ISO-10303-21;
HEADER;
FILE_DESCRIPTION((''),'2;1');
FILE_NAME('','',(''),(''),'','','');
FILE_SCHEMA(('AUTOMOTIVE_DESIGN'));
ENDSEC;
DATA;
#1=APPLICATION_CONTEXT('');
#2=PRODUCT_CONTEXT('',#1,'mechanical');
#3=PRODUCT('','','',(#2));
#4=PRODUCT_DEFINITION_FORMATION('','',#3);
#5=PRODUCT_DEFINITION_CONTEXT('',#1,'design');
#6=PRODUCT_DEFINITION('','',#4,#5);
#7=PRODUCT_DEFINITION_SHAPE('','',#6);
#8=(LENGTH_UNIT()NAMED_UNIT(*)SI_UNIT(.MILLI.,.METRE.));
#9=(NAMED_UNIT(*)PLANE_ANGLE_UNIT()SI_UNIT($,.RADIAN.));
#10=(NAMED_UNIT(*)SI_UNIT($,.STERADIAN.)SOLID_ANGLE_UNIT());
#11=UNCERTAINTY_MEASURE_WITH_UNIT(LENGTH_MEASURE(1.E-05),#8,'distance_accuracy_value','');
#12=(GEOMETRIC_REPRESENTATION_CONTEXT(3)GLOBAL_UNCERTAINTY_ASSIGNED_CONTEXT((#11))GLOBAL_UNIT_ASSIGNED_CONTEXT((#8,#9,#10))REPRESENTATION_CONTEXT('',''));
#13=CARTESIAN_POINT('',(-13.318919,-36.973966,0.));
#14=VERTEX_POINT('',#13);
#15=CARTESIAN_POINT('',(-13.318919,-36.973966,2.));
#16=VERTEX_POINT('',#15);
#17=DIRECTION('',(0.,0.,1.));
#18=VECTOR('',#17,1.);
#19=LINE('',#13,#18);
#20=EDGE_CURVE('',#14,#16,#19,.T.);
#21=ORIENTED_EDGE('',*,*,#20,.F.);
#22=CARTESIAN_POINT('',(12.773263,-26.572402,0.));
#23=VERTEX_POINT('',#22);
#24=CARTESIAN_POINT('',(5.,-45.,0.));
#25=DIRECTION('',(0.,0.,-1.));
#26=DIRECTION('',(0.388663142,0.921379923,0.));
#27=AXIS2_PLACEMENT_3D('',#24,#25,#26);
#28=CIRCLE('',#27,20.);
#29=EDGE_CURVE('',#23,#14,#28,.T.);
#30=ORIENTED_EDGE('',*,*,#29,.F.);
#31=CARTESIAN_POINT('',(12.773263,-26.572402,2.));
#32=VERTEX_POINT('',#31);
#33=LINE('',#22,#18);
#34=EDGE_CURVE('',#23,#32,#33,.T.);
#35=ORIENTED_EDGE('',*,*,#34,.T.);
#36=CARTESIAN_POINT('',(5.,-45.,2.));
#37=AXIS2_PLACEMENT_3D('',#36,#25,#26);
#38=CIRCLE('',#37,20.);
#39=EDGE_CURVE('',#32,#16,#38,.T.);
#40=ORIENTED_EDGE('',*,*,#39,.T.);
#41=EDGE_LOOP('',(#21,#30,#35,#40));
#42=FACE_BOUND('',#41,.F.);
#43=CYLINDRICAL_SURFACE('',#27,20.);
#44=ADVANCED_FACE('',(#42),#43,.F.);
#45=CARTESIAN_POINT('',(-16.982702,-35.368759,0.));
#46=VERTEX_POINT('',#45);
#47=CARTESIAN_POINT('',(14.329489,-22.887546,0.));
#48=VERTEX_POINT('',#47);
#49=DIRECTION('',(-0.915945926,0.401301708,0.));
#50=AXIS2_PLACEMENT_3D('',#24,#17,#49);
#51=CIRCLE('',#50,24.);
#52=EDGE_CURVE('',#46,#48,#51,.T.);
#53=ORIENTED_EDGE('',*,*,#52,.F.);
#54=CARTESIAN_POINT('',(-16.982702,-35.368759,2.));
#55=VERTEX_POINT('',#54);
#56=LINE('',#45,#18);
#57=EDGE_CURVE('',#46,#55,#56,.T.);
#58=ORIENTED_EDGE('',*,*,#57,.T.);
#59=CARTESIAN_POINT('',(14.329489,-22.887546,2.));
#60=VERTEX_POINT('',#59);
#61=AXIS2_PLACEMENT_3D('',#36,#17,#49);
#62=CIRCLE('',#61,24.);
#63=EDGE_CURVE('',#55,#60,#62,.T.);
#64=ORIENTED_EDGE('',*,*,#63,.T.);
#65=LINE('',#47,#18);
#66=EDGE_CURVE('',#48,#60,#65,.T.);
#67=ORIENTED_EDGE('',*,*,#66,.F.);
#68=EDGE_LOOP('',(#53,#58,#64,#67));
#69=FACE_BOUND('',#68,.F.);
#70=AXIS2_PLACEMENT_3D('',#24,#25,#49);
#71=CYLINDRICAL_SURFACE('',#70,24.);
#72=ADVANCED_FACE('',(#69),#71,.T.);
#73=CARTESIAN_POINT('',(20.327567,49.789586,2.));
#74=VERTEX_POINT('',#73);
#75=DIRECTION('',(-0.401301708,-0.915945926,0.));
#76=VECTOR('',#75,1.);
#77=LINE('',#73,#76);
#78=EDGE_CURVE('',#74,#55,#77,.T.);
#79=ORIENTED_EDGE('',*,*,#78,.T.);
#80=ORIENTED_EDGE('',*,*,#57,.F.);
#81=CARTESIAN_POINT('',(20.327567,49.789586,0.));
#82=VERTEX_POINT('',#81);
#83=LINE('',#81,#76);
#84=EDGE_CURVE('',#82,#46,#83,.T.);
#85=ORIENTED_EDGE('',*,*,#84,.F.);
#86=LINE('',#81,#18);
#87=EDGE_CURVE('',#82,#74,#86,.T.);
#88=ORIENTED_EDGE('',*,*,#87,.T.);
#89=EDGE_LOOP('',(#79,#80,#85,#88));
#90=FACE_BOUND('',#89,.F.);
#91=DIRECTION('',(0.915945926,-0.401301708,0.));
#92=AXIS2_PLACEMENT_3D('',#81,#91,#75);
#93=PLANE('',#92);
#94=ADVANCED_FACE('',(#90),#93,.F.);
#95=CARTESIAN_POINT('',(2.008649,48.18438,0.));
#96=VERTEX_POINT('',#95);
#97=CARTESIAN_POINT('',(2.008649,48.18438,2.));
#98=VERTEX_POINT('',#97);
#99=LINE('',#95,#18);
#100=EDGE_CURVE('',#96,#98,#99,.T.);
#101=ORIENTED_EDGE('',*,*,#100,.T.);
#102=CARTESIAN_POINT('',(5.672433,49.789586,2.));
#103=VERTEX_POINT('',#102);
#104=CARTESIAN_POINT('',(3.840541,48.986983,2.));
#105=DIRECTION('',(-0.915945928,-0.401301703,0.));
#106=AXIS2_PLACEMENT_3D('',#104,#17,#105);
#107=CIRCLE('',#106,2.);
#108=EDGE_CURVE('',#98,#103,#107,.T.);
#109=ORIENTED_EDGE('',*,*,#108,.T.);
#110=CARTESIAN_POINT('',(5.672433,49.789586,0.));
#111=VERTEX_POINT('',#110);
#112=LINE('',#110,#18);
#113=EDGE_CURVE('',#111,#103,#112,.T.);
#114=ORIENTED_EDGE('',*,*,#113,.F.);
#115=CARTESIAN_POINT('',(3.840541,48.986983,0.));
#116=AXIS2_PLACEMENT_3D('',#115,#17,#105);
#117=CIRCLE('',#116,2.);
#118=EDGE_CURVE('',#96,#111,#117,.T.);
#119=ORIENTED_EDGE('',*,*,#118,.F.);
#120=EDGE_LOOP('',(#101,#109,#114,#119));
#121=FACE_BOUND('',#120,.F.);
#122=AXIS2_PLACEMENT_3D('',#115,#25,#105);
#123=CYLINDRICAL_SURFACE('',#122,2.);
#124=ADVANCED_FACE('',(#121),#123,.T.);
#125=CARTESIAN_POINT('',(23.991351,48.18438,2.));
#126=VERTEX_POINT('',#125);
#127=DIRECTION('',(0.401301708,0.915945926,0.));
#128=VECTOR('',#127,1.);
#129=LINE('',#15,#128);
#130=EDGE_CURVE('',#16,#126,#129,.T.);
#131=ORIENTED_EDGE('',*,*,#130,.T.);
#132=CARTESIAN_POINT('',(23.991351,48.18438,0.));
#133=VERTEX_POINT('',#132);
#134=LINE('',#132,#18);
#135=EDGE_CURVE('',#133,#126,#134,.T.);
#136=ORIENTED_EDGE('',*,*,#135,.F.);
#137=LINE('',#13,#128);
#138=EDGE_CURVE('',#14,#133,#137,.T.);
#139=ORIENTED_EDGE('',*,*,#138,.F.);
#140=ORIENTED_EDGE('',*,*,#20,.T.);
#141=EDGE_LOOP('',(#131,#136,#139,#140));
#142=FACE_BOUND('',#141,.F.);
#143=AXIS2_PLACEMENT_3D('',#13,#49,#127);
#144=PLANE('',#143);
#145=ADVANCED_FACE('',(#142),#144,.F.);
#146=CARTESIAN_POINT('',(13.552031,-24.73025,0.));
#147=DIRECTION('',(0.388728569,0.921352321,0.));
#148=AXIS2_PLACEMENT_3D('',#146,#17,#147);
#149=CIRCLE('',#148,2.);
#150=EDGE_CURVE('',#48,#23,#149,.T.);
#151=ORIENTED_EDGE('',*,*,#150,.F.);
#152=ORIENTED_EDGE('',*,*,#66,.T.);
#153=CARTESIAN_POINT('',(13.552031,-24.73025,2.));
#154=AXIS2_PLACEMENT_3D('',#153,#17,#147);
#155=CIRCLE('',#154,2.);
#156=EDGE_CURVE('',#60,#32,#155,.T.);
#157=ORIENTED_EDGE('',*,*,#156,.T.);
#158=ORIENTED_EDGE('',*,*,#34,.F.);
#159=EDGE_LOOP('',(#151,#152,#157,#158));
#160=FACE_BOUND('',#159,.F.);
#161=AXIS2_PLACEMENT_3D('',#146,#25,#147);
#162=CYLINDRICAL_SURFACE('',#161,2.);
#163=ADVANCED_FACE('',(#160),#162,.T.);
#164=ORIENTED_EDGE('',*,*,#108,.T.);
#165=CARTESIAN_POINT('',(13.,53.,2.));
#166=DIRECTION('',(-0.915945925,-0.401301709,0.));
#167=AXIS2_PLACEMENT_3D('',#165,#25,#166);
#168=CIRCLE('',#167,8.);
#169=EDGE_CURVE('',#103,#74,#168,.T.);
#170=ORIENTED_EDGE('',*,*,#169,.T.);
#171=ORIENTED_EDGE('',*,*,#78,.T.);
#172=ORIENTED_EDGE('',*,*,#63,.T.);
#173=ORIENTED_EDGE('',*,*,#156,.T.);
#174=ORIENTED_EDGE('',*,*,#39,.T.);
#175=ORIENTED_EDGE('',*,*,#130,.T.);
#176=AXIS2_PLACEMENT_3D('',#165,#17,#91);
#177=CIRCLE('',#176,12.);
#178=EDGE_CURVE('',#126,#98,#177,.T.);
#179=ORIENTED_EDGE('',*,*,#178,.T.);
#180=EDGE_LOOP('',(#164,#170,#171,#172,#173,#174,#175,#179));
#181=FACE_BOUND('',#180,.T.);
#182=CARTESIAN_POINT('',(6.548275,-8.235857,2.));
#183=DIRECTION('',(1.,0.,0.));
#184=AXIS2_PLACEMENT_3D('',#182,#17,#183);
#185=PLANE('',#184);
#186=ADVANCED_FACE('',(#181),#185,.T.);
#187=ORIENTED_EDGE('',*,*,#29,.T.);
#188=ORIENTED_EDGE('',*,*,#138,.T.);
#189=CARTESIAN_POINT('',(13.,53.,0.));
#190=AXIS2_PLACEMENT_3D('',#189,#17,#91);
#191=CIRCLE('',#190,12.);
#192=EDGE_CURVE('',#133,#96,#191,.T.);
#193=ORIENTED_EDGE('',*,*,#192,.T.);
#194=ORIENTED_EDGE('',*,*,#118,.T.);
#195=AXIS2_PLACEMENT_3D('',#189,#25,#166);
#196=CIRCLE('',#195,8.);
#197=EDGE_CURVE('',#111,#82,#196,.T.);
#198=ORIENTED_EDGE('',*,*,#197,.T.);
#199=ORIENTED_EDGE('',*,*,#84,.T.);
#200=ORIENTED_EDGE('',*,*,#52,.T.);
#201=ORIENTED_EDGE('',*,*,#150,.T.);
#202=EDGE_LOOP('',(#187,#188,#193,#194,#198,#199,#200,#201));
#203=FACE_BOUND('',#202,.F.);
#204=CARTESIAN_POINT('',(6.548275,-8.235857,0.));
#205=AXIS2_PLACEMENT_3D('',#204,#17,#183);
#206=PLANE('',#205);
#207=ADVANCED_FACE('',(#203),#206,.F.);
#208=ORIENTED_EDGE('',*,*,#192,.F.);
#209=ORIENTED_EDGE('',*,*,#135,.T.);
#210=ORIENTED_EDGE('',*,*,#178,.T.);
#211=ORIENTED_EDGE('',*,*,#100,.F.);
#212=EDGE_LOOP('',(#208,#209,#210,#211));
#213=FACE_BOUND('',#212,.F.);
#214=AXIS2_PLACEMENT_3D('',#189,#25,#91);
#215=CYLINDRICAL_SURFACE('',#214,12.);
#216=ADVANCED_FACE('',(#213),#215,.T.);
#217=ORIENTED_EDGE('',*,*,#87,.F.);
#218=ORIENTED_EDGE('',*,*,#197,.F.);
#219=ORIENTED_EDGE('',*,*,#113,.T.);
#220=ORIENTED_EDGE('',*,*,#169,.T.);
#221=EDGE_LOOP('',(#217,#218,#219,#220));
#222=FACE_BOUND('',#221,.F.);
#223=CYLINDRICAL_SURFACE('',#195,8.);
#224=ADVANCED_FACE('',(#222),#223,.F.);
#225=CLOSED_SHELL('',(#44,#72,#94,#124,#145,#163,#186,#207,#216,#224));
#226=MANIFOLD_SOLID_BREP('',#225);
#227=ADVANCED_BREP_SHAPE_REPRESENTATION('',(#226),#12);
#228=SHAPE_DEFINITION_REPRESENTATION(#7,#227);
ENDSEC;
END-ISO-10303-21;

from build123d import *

# Parameters (mm, degrees)
F1_DEPTH = 2


# Not quite as in the source:
# - ends of sketch curves that miss each other by under 0.0002 mm in the source are joined


with BuildPart() as f1:
    # F0 (on Top) → F1 (new body)
    with BuildSketch(Plane.XY):
        with BuildLine():
            Line((-13.3189185158, -36.9739658354), (23.9913511095, 48.1843795013))
            ThreePointArc((23.9913511095, 48.1843795013), (13, 65), (2.0086488905, 48.1843795013))
            ThreePointArc((2.0086488905, 48.1843795013), (4.6431441589, 47.1550910544), (5.6724325972, 49.7895863262))
            ThreePointArc((5.6724325972, 49.7895863262), (12.9999999956, 61), (20.3275674063, 49.7895863342))
            Line((20.3275674063, 49.7895863342), (-16.982702219, -35.3687590025))
            ThreePointArc((-16.982702219, -35.3687590025), (13.8865699132, -67.2941444146), (14.3294887455, -22.8875455965))
            ThreePointArc((14.3294887455, -22.8875455965), (11.7096032974, -23.9521377539), (12.7732628489, -26.5724015487))
            ThreePointArc((12.7732628489, -26.5724015487), (12.4061358524, -63.5781902169), (-13.3189185158, -36.9739658354))
        make_face()
    extrude(amount=F1_DEPTH)


solid = f1.part
